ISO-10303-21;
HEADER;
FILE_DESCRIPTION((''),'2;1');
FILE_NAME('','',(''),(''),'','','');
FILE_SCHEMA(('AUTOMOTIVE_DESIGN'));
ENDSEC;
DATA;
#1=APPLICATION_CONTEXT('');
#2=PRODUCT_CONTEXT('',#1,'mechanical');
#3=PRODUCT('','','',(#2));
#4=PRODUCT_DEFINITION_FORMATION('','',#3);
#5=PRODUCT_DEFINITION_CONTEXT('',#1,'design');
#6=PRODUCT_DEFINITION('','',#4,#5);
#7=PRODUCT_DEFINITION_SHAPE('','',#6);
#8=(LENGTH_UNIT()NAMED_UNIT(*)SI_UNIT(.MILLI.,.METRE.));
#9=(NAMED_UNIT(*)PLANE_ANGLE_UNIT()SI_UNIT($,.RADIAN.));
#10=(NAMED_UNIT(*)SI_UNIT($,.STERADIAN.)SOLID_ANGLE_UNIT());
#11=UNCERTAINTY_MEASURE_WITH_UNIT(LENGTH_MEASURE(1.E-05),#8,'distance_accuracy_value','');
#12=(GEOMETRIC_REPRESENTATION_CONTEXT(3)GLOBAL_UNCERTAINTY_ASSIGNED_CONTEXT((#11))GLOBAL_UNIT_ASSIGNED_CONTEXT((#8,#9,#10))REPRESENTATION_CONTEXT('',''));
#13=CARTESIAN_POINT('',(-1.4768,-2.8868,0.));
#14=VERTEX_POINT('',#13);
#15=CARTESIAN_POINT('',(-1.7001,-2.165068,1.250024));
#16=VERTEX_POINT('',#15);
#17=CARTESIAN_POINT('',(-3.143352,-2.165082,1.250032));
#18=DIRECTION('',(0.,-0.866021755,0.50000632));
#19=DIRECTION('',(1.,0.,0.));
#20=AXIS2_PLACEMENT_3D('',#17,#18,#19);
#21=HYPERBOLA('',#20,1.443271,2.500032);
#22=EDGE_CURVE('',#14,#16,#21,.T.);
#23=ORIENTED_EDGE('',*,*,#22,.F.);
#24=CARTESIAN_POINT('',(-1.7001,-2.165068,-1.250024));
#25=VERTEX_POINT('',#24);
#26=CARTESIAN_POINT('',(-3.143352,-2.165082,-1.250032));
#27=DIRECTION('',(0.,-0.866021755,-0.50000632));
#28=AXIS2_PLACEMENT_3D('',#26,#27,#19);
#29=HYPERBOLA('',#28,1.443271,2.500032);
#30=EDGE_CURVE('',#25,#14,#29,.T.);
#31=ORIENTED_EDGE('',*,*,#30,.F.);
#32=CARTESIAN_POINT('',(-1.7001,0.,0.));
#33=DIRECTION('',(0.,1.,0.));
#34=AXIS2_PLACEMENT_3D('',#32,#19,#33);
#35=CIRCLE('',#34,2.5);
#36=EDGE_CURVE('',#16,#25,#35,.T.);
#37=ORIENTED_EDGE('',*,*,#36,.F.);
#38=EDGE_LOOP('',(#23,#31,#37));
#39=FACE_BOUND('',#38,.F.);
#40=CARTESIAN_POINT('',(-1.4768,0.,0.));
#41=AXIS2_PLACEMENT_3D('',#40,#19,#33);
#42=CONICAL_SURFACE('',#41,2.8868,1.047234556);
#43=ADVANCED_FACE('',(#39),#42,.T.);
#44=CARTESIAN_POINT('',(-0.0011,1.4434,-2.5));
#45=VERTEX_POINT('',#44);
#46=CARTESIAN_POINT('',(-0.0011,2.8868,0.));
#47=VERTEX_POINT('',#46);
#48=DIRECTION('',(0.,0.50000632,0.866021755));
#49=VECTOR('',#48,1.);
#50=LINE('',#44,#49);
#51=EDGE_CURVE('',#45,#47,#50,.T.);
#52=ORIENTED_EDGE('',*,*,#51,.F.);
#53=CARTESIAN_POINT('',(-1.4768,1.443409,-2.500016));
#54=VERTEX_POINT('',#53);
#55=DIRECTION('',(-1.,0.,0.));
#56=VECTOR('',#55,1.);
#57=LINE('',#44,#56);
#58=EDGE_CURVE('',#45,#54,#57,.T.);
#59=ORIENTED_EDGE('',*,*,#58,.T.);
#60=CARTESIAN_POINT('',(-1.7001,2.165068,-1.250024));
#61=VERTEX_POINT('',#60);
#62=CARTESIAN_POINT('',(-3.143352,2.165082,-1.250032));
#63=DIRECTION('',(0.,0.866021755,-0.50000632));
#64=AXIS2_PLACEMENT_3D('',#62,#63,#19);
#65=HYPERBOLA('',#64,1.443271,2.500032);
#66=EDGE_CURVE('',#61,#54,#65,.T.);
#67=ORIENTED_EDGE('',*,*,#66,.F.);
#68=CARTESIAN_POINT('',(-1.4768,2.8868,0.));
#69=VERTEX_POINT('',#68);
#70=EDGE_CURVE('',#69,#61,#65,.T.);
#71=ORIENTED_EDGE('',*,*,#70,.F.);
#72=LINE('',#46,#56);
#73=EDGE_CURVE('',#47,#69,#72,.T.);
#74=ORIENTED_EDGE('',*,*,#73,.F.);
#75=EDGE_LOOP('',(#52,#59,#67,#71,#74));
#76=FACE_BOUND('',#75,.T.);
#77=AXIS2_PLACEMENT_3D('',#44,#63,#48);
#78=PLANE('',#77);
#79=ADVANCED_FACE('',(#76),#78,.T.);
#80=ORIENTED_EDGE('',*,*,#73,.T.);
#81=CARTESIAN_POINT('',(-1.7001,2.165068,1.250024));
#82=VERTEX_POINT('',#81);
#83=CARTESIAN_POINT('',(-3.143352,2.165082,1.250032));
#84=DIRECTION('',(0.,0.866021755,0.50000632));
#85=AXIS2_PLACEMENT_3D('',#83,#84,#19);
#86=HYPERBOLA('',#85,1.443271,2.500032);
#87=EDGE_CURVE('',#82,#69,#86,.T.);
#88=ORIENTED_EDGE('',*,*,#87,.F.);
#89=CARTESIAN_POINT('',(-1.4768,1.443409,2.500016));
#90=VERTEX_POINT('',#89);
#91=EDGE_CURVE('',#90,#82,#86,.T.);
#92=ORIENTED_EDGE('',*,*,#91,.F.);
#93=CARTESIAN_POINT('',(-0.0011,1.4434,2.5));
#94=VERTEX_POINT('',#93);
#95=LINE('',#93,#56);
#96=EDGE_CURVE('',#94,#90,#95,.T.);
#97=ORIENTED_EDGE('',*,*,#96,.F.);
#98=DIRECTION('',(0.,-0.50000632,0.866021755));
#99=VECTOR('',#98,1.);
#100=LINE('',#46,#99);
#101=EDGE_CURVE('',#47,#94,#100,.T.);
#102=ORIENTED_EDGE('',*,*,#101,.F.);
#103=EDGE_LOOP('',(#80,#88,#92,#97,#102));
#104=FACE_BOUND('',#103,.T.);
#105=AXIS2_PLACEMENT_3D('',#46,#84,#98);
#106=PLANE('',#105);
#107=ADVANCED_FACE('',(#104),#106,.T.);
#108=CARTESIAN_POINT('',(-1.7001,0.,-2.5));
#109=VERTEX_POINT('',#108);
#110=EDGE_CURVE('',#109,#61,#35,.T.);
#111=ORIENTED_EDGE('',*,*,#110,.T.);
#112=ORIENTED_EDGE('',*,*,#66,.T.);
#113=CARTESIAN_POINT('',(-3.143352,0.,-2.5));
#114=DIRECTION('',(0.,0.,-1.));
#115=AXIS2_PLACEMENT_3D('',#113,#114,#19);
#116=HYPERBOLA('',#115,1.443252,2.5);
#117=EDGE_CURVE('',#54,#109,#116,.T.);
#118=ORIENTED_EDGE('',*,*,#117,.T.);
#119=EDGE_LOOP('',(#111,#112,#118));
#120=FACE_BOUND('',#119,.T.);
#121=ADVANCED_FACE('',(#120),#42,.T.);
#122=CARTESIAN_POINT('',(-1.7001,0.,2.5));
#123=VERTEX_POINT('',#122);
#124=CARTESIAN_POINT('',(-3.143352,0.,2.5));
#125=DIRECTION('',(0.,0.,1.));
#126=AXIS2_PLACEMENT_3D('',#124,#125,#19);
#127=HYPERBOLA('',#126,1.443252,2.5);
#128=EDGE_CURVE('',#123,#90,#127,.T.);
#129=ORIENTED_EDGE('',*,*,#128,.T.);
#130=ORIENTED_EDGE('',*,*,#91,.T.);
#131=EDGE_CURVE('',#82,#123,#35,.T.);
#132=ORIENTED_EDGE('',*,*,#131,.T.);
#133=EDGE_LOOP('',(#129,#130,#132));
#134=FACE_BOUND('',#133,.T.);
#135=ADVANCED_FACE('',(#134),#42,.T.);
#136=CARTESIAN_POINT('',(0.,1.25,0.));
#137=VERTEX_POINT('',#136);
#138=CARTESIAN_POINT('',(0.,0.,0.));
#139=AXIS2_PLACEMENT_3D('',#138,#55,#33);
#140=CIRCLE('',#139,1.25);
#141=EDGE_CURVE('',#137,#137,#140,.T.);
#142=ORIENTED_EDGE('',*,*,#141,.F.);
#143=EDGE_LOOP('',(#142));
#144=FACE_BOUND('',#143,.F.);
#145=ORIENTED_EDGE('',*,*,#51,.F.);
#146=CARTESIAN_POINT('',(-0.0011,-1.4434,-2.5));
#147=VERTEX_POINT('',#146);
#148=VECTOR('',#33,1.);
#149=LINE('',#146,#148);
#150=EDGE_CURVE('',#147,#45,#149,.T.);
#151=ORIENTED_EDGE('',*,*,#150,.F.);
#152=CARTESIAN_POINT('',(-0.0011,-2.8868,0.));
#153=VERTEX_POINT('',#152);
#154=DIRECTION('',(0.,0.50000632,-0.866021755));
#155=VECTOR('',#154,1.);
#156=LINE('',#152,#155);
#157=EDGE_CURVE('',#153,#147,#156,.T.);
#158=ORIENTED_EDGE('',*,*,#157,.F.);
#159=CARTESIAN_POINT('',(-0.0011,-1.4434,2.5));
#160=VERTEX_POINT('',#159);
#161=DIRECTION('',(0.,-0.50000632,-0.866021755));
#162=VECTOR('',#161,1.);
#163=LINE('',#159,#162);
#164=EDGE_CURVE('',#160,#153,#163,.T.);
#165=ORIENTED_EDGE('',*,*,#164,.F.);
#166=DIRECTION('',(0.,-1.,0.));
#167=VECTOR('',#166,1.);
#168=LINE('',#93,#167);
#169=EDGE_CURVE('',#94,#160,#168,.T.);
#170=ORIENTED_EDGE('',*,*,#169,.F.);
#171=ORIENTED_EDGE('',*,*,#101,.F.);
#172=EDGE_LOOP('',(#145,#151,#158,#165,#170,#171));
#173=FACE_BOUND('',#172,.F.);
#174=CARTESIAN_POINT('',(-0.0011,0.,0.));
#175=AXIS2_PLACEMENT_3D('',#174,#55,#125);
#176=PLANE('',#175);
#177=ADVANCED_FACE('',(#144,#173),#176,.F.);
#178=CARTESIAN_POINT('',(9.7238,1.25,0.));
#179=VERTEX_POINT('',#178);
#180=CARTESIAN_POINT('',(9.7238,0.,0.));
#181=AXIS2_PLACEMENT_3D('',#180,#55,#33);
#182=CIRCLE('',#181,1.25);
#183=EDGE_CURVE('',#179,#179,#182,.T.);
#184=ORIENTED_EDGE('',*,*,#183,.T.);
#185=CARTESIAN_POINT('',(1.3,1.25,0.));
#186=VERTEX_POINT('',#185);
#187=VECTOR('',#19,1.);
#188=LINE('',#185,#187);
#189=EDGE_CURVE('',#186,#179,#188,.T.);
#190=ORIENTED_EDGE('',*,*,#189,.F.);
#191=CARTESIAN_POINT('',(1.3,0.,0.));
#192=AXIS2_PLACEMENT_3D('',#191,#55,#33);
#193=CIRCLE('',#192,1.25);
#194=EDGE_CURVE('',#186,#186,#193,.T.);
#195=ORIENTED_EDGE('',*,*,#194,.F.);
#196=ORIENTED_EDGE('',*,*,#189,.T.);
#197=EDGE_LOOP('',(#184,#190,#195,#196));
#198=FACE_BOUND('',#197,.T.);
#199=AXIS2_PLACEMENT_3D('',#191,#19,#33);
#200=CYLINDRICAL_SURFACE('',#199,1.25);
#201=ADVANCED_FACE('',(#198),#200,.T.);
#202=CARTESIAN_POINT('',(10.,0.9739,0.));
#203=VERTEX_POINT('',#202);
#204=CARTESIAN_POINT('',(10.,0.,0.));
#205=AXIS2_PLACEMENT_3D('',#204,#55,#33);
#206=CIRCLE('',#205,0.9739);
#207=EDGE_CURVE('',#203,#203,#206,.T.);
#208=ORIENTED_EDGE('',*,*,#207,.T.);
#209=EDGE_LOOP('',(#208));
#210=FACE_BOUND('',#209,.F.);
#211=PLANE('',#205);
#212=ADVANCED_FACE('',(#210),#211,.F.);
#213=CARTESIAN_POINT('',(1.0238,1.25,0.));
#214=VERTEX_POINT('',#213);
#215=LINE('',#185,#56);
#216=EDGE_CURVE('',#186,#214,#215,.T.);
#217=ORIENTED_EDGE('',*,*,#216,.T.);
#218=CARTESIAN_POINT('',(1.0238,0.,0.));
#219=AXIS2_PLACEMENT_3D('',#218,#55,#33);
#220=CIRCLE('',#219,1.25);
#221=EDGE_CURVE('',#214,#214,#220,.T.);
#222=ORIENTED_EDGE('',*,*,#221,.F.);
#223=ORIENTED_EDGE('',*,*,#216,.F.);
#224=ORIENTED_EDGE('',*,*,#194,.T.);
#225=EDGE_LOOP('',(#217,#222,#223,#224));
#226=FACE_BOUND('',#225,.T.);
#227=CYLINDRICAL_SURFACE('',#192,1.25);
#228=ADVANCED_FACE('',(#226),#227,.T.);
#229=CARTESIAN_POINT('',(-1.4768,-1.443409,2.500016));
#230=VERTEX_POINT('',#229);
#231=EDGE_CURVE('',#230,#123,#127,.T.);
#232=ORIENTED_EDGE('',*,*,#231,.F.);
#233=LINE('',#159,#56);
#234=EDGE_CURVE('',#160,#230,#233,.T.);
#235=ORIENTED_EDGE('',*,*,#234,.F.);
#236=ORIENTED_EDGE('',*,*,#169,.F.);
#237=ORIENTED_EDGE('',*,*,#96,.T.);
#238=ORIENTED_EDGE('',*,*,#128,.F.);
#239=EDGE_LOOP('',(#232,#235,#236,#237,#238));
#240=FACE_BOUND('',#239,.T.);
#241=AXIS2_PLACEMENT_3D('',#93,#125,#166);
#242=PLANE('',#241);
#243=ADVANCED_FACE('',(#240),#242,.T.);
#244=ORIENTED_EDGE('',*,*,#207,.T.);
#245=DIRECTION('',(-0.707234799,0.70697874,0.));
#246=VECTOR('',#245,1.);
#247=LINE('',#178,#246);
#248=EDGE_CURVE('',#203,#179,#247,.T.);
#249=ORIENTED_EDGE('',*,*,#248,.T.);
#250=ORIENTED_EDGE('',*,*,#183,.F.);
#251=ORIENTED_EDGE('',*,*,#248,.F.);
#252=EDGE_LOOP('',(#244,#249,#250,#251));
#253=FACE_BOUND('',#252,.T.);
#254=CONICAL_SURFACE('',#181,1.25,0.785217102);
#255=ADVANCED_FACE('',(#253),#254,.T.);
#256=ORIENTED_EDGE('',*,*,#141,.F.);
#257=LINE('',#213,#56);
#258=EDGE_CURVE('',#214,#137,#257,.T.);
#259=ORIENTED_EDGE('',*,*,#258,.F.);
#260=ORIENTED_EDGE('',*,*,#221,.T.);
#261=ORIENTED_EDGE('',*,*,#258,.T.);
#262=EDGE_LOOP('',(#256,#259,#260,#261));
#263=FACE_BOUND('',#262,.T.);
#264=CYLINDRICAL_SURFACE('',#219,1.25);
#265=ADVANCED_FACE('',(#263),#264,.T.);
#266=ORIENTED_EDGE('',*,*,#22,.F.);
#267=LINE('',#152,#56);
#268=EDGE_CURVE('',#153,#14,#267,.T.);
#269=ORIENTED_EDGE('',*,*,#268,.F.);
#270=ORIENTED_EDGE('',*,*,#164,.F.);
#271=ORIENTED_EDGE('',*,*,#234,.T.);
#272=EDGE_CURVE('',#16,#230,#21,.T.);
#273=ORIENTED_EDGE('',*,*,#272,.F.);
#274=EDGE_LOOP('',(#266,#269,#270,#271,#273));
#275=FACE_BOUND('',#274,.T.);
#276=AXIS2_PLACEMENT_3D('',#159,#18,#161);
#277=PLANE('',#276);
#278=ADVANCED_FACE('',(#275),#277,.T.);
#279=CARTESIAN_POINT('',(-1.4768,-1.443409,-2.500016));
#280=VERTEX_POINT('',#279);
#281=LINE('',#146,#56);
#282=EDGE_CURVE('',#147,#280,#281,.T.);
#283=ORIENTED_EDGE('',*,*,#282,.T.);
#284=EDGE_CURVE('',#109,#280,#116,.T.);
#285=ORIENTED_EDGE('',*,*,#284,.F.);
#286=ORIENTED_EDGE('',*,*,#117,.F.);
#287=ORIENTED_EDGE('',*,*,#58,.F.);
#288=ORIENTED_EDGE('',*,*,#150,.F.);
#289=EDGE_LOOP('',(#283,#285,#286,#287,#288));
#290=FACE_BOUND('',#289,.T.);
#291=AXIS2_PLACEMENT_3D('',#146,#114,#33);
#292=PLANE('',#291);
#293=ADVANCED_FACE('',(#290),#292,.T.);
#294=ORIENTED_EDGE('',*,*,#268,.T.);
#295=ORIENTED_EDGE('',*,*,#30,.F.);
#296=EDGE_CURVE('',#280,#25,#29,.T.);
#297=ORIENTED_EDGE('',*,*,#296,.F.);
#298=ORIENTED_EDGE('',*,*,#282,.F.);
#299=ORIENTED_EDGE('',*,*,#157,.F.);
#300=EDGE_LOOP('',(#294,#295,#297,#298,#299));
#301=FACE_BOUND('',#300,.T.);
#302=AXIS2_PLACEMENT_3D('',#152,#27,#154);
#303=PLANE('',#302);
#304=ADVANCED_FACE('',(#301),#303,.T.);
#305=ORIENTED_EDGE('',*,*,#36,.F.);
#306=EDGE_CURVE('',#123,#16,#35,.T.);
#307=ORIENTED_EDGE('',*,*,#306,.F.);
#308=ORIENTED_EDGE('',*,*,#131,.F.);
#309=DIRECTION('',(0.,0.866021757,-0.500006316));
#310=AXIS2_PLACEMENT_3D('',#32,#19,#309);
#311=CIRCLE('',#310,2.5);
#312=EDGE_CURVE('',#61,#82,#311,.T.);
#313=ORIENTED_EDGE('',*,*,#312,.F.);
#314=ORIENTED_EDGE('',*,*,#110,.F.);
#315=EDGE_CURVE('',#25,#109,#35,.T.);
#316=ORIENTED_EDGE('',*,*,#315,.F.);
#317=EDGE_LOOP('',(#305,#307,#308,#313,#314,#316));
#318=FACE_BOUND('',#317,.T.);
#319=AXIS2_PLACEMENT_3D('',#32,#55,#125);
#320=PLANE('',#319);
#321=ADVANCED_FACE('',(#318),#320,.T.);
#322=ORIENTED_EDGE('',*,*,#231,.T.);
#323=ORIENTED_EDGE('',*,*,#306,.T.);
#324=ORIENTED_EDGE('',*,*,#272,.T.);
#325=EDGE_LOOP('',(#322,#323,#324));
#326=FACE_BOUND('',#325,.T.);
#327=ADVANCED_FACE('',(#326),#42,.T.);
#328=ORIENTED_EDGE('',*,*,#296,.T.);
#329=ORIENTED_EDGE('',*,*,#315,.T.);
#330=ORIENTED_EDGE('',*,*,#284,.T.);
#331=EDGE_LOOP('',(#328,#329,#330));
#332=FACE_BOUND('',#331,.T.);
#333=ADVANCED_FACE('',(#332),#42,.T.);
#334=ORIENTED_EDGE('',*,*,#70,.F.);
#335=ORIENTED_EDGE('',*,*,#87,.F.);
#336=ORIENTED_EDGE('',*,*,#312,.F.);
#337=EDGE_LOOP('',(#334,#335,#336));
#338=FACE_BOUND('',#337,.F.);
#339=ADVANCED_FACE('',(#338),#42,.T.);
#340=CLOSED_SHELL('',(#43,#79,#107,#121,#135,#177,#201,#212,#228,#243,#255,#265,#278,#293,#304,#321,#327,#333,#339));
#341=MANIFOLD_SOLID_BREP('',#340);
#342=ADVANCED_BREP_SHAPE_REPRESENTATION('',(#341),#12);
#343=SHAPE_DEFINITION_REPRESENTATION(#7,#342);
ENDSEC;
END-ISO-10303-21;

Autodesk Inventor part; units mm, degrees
ref_plane "YZ Plane" through (0, 0, 0) normal (1, 0, 0) x (0, 1, 0)
ref_plane "XZ Plane" through (0, 0, 0) normal (0, 1, 0) x (-1, 0, 0)
sketch "Szkic1" plane through (0, 0, 0) normal (0, 0, 1) x (1, 0, 0)
  line L0 (0, 2.5) -> (0, 1.25)
  line L1 (1.3, 1.25) -> (10, 1.25)
  line L2 (10, 1.25) -> (10, 0)
  line L3 (10, 0) -> (-0.0011, 0)
  line L4 (-2.0013, 0) -> (12.0002, 0) projected
  line L5 (-0.0011, 0) -> (-0.0011, 2.5)
  line L6 (-0.0011, 2.5) -> (0, 2.5)
  line L7 (1.3, 1.25) -> (1.0238, 1.25)
  line L8 (1.0238, 1.25) -> (0, 1.25)
  line L9 (0, -0.5) -> (0, 3) projected
  dimension "d0" = 10
  dimension "d1" = 8.7
  dimension "d2" = 2.5
  dimension "d9" = 0.0011
  dimension "d10" = 5
  dimension "d13" = 0.2762
  dimension "d14" = 2.5
revolve "Bryła" add sketch "Szkic1" angle 360 about axis through (10, 0, 0) along (-1, 0, 0)
sketch "Szkic2" plane through (-0.0011, 0, 0) normal (-1, 0, 0) x (0, 0, 1)
  line L0 (0, 2.8868) -> (2.5, 1.4434)
  line L1 (2.5, 1.4434) -> (2.5, -1.4434)
  line L2 (2.5, -1.4434) -> (0, -2.8868)
  line L3 (0, -2.8868) -> (-2.5, -1.4434)
  line L4 (-2.5, -1.4434) -> (-2.5, 1.4434)
  line L5 (-2.5, 1.4434) -> (0, 2.8868)
  point P0 (0, 0)
  point P1 (0, 0)
  dimension "d11" = 5
extrude "Głowica" add sketch "Szkic2" along normal blind 1.699
sketch "Szkic4" plane through (0, 0, 0) normal (0, 0, 1) x (1, 0, 0)
  line L0 (-1.7001, 2.5) -> (-1.7001, 2.8868)
  line L1 (-1.7001, 2.8868) -> (-1.4768, 2.8868)
  line L2 (-1.4768, 2.8868) -> (-1.7001, 2.5)
  line L3 (-2.0399, 0) -> (0.3387, 0) projected
  line L4 (-0.0011, 2.8868) -> (-1.7001, 2.8868) projected
  line L5 (-1.7001, 1.4434) -> (-1.7001, 2.8868) projected
  dimension "d5" = 30
  dimension "d19" = 5
revolve "Faza1" cut sketch "Szkic4" angle 360 about axis through (-10, 0, 0) along (1, 0, 0)
thread "Gwint" size "M2.5x0.45" class "6g" standard "ISO Metric profile" length 8.7
chamfer "Faza2" distance 0.2761 distance2 0.2762 1 edges at (10, -1.25, 0) measured on face at (10, -0.674, 0.4136)
ref_plane "Work Plane1" through (1.525, 0, 0) normal (0, 0, 1) x (1, 0, 0)
equation "\"d11\" = SW"
equation "\"d3\" = KOH - SD"
equation "\"d15\" = GEL"
equation "\"d6\" = -0.5 * SPD + 0.5 * GD"
equation "\"d0\" = NLG"
equation "\"d1\" = GEL"
equation "\"d2\" = GD"
equation "\"d10\" = SD2"
equation "\"d14\" = BDM"
equation "\"d5\" = ANG1"
equation "\"d19\" = SW0"
equation "\"NLG\" = 10"
equation "\"GD\" = NND"
equation "\"BDM\" = NND"
equation "\"KOH\" = 1.7"
equation "\"GEL\" = 8.7"
equation "\"SW\" = 5"
equation "\"SW0\" = SW"
equation "\"SPD\" = NND - 1.2269 * PTC"
equation "\"SD2\" = SW"
equation "\"SD\" = 0.001"
equation "\"ANG1\" = 30deg"
equation "\"GAL\" = 0.61345 * PTC"
equation "\"GUL\" = 0.61345 * PTC"
equation "\"RR\" = 0.001"
equation "\"WFT\" = SD"
equation "\"GD1\" = THREADDIA - 1.2269 * PTC"
equation "\"THREADDIA\" = 2.5"
equation "\"SDH\" = SW"
equation "\"TOA\" = 30deg"
equation "\"FAWI\" = 45deg"
equation "\"PTC\" = 0.45"
equation "\"NND\" = 2.5"
equation "\"E0\" = 1.155 * SW"
properties part number "AS 1110 - M2,5 x 10" material "Stal, miękka"
